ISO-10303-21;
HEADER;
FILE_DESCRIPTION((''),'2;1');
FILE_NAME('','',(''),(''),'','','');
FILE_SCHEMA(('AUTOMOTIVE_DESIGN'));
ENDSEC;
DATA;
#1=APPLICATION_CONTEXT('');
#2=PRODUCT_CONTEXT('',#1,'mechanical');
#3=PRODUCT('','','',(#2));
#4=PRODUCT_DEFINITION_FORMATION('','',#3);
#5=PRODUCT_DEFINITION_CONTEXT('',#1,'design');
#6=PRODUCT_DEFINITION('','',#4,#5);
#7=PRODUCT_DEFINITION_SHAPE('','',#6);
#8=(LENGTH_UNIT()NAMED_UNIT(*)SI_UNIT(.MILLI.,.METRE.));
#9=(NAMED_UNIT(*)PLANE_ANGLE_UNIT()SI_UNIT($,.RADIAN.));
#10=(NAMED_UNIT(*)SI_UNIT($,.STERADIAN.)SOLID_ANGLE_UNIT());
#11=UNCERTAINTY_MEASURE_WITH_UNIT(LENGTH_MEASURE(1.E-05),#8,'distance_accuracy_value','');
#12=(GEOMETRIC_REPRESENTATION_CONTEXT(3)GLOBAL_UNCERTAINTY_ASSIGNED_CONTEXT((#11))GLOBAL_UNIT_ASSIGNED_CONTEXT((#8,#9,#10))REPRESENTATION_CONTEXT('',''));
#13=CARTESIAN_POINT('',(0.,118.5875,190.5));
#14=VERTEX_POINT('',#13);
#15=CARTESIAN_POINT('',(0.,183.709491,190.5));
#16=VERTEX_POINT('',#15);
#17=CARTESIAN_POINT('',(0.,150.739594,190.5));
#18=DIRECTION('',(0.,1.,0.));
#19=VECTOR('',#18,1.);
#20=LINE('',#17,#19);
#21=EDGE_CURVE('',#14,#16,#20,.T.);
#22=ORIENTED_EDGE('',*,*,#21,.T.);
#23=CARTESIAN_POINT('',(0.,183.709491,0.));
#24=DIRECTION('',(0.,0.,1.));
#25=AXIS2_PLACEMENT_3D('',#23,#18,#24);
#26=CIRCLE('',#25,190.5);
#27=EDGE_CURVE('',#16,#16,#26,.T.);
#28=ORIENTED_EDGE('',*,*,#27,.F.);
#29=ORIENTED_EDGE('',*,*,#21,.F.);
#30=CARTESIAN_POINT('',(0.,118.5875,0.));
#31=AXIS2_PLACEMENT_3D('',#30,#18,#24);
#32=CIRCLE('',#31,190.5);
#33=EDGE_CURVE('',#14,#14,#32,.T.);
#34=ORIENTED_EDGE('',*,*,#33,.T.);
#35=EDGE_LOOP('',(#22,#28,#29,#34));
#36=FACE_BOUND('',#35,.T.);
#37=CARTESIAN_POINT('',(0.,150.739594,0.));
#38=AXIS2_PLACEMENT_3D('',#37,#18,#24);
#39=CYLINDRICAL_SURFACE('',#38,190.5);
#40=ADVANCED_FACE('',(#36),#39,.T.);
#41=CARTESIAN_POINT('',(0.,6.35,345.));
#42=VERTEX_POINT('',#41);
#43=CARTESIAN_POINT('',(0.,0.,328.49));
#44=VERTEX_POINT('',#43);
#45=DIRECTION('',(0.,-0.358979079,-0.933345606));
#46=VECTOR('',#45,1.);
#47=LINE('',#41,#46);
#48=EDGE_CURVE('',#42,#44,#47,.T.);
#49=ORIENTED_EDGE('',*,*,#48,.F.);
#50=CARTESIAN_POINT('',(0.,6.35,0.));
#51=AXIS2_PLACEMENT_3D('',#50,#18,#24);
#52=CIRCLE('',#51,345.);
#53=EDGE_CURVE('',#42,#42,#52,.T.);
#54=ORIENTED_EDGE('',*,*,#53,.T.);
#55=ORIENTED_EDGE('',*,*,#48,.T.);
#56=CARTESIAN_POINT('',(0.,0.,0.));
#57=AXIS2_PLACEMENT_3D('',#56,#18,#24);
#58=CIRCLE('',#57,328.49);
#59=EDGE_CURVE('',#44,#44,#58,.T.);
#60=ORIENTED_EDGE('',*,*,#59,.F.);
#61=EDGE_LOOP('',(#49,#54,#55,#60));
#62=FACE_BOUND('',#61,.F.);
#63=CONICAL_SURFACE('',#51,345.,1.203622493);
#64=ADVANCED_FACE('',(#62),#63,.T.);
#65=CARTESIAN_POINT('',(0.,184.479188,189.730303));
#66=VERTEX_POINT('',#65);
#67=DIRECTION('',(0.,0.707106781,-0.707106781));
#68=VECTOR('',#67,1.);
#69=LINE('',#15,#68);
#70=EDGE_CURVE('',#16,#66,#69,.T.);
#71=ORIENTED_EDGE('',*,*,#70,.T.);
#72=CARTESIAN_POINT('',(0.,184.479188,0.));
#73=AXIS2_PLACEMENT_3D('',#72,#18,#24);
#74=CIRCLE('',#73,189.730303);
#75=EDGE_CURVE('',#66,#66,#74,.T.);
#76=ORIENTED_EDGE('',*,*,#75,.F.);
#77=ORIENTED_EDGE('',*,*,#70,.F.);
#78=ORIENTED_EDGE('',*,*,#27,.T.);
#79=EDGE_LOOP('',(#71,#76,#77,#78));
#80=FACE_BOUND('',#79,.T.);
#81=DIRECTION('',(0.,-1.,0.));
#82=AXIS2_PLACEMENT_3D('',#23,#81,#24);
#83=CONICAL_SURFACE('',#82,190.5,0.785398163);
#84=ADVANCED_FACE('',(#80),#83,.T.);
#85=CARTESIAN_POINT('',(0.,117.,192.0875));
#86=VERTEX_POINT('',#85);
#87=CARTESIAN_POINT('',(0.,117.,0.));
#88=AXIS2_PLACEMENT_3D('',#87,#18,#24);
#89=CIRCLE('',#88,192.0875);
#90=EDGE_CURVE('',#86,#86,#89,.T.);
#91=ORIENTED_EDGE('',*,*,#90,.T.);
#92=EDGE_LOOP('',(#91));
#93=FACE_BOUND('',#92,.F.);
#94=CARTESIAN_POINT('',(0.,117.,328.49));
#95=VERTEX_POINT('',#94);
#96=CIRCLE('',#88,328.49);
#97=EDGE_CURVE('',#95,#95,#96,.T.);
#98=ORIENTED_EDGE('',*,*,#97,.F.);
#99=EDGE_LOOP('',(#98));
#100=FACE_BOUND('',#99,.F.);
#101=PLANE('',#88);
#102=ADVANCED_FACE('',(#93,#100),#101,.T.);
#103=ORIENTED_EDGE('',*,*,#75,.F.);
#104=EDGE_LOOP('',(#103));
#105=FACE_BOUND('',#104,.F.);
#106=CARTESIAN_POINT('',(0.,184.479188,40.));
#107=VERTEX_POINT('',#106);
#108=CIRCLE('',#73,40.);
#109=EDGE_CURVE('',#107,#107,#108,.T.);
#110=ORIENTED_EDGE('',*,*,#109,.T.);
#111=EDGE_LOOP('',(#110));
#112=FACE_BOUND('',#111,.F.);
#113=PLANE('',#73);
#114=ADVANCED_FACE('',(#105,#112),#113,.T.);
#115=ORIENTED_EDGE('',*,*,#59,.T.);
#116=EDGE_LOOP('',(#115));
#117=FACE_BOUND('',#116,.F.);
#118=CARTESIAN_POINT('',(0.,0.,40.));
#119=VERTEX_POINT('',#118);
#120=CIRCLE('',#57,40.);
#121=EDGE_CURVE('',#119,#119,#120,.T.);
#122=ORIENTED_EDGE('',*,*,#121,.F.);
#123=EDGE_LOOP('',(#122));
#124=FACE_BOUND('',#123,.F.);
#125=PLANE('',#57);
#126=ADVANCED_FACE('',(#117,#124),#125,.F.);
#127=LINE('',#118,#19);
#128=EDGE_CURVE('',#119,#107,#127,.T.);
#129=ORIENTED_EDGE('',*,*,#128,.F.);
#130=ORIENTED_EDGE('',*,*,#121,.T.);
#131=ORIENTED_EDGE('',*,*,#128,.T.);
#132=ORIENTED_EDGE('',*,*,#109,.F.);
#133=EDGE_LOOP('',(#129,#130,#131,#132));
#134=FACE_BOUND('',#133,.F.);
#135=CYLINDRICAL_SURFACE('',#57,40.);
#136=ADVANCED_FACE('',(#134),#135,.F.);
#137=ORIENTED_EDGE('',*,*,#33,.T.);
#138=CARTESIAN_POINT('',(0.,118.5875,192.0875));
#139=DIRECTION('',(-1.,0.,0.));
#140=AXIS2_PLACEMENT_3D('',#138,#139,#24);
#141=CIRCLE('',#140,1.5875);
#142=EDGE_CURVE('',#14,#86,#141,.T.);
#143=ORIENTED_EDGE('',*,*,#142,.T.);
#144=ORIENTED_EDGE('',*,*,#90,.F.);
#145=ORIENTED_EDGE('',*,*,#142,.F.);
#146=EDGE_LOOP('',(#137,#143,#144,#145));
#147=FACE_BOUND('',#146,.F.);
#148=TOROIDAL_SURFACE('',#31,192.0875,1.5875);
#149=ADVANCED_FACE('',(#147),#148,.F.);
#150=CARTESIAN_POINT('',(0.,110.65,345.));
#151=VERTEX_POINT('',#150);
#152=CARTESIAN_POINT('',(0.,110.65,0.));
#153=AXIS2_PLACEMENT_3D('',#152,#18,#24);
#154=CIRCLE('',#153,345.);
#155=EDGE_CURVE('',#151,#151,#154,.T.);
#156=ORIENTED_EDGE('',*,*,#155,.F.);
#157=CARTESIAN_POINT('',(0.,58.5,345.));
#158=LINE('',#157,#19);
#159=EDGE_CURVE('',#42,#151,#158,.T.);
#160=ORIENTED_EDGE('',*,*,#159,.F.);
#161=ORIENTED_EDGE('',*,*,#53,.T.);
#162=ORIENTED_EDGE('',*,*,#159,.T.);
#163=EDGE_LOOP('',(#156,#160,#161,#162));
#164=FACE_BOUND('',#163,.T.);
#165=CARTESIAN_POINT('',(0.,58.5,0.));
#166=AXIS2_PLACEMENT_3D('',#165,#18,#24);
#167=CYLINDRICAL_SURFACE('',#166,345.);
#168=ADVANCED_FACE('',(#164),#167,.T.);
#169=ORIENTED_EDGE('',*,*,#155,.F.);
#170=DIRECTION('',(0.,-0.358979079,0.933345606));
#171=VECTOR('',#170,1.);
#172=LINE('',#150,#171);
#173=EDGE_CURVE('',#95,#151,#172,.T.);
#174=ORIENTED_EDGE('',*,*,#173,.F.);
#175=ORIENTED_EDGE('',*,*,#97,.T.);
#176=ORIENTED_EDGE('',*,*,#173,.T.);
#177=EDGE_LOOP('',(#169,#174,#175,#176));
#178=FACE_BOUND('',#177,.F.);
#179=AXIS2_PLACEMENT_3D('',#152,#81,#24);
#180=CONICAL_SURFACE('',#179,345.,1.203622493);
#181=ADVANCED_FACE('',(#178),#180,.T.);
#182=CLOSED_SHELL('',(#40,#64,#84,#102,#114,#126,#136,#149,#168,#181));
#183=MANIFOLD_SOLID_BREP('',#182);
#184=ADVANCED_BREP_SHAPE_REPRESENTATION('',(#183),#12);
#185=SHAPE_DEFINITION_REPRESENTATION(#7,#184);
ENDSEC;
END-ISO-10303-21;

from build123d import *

# Parameters (mm, degrees)
F0_W        = 117
F0_H        = 154.5
F0_H_2      = 150.5
F0_W_2      = 67.4791876724
F2_R        = 1.5875
F3_SIZE     = 0.7696969697
F4_C1_SIZE2 = 6.35
F4_C1_SIZE  = 16.51
F4_C2_SIZE2 = 16.51
F4_C2_SIZE  = 6.35


with BuildPart() as f1:
    # F0 (on Right) → F1 (revolve)
    with BuildSketch(Plane.YZ):
        with Locations((58.5, 267.75)):
            Rectangle(F0_W, F0_H)
        with Locations((58.5, 115.25)):
            Rectangle(F0_W, F0_H_2)
        with Locations((150.7395938362, 115.25)):
            Rectangle(F0_W_2, F0_H_2)
    revolve(axis=Axis((0, 115.410885826, 0), (0, 1, 0)))

    # F2
    f2_edges = [f1.edges().sort_by_distance(p)[0] for p in [
        (0, 117, -190.5),
    ]]
    fillet(f2_edges, radius=F2_R)

    # F3
    f3_edges = [f1.edges().sort_by_distance(p)[0] for p in [
        (0, 184.479188, -190.5),
    ]]
    chamfer(f3_edges, length=F3_SIZE)

    # F4: chamfer of 6.35 x 16.51 on 4 edges, made by hand

    # F4_c1
    f4_c1_edges = [f1.edges().sort_by_distance(p)[0] for p in [
        (0, 117, -345),
    ]]
    f4_c1_side = f1.faces().sort_by_distance((0, 117, -344.873))[0]
    chamfer(f4_c1_edges, length=F4_C1_SIZE, length2=F4_C1_SIZE2, reference=f4_c1_side)

    # F4_c2
    f4_c2_edges = [f1.edges().sort_by_distance(p)[0] for p in [
        (0, 0, -345),
    ]]
    f4_c2_side = f1.faces().sort_by_distance((0, 0.127, -345))[0]
    chamfer(f4_c2_edges, length=F4_C2_SIZE, length2=F4_C2_SIZE2, reference=f4_c2_side)


solid = f1.part
